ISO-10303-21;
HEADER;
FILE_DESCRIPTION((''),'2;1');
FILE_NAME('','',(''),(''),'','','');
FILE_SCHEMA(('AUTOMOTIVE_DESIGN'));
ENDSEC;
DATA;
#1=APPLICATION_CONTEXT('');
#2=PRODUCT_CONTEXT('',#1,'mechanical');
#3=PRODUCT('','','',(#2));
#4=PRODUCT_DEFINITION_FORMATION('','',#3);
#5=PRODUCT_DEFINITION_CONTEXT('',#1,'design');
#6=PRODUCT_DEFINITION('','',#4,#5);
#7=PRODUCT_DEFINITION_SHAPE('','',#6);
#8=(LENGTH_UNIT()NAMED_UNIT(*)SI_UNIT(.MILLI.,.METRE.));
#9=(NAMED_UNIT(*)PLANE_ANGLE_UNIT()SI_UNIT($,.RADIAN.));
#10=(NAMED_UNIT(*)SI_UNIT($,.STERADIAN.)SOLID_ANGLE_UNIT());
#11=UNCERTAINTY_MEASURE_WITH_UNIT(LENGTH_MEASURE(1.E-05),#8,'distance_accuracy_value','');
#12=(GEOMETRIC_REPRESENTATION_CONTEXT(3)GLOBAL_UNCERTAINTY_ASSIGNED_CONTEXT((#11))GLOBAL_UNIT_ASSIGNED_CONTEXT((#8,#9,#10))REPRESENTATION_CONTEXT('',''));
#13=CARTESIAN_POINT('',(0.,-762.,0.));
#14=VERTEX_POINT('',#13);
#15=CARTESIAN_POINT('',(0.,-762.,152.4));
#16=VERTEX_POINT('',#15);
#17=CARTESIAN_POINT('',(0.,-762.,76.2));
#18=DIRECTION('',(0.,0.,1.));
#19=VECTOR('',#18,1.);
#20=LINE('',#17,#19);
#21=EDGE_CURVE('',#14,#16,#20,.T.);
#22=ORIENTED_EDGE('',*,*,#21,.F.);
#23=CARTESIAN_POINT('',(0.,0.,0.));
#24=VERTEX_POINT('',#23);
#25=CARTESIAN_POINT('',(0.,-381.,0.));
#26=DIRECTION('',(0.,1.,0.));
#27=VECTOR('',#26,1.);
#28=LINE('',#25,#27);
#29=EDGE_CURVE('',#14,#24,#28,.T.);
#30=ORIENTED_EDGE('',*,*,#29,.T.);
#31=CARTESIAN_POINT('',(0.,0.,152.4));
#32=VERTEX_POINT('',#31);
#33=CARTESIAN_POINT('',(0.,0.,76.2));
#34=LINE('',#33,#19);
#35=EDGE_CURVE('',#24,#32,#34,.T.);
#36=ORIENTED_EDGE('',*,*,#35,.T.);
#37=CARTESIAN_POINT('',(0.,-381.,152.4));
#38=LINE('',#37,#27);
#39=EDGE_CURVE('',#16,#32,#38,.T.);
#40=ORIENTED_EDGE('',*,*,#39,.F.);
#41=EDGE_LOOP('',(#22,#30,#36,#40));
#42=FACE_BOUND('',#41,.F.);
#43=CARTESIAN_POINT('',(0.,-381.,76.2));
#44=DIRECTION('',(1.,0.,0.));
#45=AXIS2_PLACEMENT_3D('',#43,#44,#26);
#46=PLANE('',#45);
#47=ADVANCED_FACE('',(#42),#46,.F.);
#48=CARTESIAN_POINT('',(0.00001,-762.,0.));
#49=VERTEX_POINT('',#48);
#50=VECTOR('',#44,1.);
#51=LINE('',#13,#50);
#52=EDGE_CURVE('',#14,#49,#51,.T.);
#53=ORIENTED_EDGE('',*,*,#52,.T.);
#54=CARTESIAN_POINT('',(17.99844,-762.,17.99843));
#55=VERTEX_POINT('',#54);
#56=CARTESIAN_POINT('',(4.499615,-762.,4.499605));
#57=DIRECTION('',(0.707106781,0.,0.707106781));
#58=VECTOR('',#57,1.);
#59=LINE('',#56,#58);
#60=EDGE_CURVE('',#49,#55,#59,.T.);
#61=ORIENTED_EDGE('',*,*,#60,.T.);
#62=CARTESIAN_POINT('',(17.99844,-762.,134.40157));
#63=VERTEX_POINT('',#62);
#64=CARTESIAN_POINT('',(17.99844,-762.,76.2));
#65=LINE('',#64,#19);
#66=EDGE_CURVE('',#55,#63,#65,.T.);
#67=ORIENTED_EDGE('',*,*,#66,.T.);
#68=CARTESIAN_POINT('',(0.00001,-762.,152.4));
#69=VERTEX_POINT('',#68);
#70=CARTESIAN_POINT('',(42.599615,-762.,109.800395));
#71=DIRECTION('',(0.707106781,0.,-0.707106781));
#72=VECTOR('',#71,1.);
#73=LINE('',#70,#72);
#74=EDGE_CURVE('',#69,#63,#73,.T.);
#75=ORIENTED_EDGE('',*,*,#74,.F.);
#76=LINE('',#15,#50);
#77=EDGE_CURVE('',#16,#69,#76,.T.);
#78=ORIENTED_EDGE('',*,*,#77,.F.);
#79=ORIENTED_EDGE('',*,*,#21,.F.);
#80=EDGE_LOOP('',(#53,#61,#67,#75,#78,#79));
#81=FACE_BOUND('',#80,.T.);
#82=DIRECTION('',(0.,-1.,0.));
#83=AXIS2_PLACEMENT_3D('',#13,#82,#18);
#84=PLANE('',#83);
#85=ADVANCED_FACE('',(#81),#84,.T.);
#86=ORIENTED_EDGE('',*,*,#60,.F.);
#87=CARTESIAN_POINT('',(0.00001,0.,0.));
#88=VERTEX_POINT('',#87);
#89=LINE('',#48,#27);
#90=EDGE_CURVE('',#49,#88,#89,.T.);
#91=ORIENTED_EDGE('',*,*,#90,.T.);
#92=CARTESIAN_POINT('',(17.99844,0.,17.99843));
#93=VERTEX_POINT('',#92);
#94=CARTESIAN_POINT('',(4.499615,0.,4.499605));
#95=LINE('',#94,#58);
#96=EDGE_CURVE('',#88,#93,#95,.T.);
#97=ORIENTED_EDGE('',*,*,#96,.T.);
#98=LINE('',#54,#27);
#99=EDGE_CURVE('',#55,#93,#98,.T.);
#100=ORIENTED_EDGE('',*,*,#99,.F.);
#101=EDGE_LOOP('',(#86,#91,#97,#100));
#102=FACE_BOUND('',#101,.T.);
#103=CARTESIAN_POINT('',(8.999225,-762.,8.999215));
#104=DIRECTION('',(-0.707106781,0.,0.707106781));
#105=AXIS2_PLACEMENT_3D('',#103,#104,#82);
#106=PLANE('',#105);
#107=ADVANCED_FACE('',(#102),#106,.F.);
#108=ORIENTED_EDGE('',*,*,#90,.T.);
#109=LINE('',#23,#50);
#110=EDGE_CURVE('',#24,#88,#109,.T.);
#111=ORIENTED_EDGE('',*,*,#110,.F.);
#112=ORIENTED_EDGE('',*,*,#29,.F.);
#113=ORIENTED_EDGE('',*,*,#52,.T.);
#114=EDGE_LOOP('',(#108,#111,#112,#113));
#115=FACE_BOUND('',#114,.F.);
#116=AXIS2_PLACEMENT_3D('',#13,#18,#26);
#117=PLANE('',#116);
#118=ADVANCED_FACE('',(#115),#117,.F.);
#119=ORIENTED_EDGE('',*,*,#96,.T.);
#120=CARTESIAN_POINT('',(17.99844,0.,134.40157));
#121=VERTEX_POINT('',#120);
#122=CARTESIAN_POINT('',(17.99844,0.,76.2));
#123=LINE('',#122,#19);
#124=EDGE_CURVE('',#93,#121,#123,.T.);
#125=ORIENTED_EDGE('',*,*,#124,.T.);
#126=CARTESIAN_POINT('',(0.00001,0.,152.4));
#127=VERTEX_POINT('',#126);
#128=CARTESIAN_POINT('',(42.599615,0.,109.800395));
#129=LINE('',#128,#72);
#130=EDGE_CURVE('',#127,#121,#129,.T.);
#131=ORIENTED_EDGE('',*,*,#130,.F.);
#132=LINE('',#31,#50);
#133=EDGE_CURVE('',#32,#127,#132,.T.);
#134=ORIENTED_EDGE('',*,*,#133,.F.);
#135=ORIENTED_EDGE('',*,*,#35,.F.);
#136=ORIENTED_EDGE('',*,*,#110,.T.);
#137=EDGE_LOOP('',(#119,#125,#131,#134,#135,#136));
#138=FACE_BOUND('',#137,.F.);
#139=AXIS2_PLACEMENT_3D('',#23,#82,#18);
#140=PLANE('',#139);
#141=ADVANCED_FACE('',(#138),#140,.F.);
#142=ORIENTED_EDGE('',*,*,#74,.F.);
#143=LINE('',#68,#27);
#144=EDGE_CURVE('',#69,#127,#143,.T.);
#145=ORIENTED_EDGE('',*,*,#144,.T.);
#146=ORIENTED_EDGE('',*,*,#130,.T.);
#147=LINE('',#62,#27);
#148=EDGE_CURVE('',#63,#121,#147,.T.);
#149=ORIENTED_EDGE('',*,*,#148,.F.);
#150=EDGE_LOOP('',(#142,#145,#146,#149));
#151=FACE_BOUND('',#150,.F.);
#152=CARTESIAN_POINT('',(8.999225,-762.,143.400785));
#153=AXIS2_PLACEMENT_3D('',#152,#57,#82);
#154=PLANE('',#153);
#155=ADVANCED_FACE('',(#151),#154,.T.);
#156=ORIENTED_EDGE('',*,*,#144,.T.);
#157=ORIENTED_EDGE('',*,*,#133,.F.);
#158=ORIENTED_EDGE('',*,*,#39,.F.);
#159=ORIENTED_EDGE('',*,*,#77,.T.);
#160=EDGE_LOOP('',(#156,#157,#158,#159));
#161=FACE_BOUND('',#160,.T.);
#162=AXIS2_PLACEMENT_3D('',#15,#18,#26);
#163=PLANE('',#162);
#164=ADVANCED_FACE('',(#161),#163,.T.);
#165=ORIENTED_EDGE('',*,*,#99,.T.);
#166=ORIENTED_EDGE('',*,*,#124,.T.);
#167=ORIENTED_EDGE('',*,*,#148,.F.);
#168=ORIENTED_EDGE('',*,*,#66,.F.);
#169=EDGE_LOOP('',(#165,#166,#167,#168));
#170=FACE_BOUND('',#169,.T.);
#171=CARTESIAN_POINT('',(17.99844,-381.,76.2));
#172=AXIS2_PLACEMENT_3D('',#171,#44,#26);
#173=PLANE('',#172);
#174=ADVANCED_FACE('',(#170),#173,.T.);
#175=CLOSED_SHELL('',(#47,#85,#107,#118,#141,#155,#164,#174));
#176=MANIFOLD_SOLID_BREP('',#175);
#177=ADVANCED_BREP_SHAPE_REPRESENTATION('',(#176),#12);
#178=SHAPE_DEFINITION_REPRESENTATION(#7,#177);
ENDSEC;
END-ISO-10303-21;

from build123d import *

# Parameters (mm, degrees)
F0_W     = 762
F0_H     = 152.4
F1_DEPTH = 17.99844
F2_SIZE  = 17.99843


# Not quite as in the source:
# - a fillet or chamfer is up to 0.001 mm smaller than in the source, because OpenCascade refuses the exact size


with BuildPart() as f1:
    # F0 (on Right) → F1 (new body)
    with BuildSketch(Plane.YZ):
        with Locations((-381, 76.2)):
            Rectangle(F0_W, F0_H)
    extrude(amount=F1_DEPTH)

    # F2 (size 17.99844 in the source; OpenCascade refuses exactly that, so slightly less here)
    f2_edges = [f1.edges().sort_by_distance(p)[0] for p in [
        (17.99844, -381, 152.4),
        (17.99844, -381, 0),
    ]]
    chamfer(f2_edges, length=F2_SIZE)


solid = f1.part
